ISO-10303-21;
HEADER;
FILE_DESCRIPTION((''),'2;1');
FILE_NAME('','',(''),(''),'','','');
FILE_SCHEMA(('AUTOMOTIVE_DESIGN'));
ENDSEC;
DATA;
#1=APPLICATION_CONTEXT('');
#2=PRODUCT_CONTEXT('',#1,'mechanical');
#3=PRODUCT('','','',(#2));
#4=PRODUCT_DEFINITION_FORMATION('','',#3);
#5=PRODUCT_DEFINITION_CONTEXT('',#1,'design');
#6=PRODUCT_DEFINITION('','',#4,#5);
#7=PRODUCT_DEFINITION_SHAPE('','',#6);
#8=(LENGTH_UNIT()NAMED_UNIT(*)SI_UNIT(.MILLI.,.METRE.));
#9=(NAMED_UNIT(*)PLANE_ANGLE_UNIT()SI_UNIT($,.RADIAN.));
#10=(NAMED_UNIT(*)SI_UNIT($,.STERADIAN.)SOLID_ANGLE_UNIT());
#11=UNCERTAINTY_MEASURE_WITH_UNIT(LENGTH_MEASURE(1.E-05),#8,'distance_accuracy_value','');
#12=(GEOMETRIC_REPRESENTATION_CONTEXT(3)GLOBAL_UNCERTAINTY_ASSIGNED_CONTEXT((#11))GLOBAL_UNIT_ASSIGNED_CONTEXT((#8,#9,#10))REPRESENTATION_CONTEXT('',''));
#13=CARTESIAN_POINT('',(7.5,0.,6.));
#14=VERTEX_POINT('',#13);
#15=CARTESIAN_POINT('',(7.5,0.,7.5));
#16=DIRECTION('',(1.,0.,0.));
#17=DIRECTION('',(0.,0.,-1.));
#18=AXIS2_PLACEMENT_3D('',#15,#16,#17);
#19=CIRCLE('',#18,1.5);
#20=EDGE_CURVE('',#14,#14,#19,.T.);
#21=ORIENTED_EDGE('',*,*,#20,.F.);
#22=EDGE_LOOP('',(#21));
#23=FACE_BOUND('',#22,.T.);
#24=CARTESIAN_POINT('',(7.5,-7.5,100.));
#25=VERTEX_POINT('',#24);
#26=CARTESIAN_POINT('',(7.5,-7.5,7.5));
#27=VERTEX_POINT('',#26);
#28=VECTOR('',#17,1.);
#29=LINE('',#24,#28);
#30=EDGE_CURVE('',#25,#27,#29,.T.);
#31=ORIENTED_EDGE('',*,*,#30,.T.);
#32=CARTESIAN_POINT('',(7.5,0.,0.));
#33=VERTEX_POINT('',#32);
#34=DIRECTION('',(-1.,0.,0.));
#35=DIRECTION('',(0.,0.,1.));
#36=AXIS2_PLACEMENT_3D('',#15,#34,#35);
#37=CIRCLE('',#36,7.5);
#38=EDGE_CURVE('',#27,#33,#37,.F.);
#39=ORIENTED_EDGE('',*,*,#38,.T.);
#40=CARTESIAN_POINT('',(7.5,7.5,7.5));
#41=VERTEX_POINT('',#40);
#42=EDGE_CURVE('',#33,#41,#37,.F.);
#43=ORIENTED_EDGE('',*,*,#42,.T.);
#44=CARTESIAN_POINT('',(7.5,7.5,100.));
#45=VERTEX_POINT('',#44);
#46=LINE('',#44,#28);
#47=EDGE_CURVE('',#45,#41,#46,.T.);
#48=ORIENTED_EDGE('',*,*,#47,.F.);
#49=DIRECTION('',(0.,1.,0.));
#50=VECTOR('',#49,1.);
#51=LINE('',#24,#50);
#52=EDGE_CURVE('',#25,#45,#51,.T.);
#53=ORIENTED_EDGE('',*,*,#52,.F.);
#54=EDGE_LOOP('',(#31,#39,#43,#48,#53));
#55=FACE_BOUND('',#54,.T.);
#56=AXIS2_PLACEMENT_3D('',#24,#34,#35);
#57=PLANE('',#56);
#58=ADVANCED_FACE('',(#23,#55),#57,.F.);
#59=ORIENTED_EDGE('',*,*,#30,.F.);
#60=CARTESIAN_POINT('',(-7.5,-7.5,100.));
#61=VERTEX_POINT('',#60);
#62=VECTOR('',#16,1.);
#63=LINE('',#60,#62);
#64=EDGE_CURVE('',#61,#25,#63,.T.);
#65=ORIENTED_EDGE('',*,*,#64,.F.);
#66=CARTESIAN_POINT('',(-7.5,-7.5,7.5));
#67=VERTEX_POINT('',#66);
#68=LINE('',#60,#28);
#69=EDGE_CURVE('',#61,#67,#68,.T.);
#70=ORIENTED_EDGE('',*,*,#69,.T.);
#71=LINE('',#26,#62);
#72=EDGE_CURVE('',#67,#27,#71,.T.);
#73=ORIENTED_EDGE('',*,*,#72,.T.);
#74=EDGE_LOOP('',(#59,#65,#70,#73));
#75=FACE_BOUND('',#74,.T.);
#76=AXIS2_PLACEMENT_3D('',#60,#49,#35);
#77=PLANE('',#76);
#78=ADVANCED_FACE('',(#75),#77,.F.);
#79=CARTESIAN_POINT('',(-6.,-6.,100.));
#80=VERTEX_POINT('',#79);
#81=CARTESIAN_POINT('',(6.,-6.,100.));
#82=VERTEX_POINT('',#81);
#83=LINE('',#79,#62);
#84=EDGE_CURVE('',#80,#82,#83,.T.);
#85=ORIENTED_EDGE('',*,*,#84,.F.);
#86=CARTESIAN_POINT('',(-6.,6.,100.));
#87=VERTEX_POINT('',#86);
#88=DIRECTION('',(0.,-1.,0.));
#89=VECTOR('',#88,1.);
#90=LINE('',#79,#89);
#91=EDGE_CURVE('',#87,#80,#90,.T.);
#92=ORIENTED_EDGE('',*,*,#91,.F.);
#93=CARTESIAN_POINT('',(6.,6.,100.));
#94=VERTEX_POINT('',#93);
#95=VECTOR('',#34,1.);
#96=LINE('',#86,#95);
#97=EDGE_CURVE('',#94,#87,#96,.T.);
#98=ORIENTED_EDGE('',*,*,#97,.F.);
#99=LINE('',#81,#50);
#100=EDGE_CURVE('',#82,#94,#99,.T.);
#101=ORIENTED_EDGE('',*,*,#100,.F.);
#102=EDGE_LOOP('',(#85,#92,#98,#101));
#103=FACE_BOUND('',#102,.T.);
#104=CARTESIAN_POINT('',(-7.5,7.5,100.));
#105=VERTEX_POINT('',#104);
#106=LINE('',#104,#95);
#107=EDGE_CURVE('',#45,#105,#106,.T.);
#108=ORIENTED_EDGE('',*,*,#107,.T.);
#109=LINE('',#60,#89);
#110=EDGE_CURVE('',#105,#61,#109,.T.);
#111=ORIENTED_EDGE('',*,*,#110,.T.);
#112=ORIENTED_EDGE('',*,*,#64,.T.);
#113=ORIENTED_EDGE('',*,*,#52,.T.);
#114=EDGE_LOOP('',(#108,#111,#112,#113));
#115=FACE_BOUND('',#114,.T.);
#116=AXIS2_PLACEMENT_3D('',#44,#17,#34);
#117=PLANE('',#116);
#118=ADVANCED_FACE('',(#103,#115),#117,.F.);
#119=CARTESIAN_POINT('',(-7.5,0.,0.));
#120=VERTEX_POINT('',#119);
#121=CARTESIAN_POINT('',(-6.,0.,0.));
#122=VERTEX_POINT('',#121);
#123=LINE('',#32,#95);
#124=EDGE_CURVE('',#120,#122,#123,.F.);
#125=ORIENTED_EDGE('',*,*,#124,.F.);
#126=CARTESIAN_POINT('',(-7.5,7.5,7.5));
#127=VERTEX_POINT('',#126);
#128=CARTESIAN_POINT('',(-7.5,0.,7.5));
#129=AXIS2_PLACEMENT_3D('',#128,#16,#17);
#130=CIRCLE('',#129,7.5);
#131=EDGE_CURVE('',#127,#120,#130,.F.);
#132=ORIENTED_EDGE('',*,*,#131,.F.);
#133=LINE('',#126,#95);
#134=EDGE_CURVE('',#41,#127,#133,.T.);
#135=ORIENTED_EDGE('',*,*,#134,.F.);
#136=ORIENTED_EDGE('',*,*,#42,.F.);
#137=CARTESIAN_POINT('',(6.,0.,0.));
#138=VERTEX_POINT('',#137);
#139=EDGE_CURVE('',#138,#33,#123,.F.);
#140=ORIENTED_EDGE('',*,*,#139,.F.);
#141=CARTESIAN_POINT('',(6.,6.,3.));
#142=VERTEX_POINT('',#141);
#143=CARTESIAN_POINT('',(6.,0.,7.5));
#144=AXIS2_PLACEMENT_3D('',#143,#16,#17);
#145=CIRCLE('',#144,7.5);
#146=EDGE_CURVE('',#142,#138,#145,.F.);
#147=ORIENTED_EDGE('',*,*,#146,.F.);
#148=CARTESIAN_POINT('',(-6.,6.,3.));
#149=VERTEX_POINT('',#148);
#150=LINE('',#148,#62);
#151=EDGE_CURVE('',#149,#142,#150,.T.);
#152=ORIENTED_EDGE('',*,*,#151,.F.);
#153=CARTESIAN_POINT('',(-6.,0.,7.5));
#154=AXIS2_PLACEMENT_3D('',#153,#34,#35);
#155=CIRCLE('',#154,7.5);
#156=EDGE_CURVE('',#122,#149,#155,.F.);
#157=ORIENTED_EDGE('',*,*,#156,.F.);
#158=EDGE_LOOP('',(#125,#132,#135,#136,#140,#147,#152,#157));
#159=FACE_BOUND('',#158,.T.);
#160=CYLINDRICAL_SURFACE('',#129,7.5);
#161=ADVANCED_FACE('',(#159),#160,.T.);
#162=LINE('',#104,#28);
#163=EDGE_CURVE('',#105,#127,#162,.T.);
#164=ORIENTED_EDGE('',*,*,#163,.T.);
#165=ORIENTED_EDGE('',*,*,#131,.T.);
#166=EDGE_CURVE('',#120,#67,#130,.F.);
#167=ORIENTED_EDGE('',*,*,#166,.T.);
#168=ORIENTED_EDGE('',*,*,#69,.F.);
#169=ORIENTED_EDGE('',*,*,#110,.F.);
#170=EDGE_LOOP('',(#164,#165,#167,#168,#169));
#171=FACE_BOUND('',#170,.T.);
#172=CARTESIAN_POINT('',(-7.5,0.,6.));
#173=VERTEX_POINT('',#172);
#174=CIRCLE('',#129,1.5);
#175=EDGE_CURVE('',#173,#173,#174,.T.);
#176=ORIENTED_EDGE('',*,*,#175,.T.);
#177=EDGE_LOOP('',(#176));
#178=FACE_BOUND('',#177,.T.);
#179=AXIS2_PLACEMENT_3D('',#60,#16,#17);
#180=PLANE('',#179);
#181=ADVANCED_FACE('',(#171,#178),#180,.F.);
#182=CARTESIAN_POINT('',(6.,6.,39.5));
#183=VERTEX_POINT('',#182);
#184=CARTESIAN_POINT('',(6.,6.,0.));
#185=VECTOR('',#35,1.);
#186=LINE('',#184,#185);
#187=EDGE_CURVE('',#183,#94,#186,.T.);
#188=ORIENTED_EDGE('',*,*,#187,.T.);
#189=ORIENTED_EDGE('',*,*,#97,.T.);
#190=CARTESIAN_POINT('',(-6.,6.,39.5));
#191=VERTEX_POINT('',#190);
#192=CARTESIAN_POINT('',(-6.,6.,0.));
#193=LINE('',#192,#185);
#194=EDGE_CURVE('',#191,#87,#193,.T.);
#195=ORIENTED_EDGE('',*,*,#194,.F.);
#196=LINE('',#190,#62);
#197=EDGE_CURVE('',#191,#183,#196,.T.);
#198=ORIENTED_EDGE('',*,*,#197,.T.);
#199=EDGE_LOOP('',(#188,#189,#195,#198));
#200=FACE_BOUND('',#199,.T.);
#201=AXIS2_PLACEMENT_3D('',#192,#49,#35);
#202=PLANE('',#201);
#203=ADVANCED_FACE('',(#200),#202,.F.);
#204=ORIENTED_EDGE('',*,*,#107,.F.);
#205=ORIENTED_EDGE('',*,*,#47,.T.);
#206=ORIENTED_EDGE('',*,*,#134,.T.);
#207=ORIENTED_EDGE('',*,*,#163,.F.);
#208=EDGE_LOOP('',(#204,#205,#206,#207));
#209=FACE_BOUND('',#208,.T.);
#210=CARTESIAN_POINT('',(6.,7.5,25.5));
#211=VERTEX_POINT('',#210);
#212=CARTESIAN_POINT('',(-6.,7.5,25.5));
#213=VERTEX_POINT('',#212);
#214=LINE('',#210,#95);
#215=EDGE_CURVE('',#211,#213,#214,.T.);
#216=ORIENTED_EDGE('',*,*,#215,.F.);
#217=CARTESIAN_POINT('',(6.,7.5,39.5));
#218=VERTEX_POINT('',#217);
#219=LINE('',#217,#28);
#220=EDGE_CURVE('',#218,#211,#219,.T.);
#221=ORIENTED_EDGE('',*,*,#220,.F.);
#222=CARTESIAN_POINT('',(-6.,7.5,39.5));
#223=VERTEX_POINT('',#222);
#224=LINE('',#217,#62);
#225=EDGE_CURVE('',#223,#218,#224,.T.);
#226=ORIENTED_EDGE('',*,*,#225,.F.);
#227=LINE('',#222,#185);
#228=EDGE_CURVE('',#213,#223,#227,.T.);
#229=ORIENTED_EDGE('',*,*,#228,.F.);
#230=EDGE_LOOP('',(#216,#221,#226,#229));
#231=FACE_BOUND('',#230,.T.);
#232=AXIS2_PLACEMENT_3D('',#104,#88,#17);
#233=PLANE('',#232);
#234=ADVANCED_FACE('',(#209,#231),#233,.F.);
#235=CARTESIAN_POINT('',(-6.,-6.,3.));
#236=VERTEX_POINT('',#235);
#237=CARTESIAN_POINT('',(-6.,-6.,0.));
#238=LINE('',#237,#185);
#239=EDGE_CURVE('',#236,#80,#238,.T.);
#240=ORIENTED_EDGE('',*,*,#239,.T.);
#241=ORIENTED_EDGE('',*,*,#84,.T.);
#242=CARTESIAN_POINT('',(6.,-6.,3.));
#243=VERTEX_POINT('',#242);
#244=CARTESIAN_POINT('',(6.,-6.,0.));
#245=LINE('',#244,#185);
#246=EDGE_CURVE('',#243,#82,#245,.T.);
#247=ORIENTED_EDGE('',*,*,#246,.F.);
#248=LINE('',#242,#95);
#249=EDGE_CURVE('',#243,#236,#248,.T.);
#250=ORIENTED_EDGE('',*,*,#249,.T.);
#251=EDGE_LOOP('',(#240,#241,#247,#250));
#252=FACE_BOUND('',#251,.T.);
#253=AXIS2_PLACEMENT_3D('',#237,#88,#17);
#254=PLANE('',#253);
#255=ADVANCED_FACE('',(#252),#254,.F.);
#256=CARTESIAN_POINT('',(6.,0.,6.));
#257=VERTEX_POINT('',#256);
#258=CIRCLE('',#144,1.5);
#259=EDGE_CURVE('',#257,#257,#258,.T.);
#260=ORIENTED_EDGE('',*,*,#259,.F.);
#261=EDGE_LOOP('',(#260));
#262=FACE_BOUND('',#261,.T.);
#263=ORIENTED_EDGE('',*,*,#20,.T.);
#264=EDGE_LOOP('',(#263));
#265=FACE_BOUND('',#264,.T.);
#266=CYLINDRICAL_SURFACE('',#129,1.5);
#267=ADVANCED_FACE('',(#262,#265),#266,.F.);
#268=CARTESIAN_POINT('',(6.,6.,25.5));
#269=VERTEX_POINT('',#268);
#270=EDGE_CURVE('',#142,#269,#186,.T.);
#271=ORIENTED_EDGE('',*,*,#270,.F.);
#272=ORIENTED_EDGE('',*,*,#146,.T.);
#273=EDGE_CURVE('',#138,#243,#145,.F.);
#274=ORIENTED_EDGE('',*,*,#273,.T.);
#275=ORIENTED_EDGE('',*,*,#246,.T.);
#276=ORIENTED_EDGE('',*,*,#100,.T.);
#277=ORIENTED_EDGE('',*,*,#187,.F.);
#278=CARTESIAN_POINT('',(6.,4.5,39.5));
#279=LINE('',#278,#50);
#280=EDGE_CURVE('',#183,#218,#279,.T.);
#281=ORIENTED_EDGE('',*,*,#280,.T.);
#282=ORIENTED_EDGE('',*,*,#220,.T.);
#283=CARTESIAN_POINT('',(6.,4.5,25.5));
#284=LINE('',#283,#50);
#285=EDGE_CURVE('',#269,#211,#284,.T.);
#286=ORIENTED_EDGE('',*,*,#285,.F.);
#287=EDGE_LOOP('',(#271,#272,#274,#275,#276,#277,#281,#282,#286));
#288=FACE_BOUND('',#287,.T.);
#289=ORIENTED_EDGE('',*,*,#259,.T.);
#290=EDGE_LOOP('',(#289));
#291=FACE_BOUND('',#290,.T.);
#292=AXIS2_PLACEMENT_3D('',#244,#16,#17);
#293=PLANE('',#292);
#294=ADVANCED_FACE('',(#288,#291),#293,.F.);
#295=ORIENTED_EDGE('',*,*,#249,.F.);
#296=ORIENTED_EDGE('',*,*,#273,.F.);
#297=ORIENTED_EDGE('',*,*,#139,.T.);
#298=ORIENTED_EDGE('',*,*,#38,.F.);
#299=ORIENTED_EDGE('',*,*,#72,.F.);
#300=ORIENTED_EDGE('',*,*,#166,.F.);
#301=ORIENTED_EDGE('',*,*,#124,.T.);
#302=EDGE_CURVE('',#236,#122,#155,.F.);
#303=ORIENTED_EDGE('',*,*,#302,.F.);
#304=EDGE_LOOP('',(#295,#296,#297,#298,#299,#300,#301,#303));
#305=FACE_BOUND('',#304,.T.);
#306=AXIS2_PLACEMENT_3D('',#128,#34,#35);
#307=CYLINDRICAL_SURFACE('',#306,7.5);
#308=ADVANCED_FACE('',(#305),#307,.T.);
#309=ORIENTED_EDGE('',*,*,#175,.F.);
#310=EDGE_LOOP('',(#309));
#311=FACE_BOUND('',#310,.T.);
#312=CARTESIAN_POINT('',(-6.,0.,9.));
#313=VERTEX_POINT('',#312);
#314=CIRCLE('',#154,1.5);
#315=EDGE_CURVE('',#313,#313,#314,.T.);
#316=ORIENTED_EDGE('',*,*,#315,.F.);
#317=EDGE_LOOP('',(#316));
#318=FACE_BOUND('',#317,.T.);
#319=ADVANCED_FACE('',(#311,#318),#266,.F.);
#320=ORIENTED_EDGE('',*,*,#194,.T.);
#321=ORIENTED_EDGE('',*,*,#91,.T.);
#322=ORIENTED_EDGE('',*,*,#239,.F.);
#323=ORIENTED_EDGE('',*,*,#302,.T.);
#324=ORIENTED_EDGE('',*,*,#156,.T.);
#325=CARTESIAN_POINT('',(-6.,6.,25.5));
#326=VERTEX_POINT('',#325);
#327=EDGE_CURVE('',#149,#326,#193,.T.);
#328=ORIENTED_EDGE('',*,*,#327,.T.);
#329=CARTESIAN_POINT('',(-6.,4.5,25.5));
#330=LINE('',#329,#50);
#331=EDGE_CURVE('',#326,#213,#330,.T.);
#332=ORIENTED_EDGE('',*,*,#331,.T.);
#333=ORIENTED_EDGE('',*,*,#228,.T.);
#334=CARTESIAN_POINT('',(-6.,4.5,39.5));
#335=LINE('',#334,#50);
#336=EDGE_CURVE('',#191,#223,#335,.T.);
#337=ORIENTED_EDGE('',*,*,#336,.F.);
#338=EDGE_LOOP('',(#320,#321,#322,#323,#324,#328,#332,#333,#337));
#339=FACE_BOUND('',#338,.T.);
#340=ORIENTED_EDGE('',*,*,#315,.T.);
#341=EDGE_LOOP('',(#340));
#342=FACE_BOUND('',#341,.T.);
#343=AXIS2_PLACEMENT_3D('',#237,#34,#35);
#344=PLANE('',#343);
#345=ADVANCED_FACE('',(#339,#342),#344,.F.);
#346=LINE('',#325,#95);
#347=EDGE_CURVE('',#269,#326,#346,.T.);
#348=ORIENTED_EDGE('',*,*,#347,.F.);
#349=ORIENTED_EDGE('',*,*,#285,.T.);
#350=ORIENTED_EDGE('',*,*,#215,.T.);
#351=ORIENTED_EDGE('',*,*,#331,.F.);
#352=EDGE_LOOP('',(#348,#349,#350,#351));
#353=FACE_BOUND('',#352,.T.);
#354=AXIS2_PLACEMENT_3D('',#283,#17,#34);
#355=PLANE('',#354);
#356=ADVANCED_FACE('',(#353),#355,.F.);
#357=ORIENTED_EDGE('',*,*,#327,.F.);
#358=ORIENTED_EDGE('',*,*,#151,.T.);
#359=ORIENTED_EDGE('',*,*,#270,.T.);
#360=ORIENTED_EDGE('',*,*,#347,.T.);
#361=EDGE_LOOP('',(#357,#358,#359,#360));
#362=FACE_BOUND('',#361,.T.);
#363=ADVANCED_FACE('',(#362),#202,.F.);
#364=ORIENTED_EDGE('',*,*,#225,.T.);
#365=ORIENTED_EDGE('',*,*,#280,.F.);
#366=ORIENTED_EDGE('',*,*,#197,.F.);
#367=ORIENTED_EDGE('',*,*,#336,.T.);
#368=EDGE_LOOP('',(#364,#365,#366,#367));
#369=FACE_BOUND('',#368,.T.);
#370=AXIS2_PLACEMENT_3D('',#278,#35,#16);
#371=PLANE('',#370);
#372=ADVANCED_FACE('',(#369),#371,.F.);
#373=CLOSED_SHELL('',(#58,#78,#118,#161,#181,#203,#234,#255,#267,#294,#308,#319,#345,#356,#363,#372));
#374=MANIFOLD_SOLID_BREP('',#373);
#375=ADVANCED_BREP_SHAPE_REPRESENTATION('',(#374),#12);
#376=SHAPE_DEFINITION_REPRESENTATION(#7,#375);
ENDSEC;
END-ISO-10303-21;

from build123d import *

# Parameters (mm, degrees)
ESQUISSE1_W             = 15
ESQUISSE1_H             = 15
EXTRUSION1_DEPTH        = 100
ESQUISSE2_W             = 12
ESQUISSE2_H             = 12
EXTRUSION2_DEPTH        = 101.560926806
CONG_1_R                = 7.5
ESQUISSE3_R             = 1.5
EXTRUSION3_DEPTH        = 102.396498953
ESQUISSE4_W             = 12
ESQUISSE4_H             = 14
ENL_V_MAT_EXTRU_1_DEPTH = 3


with BuildPart() as part:
    # Esquisse1 → Extrusion1 (new body)
    with BuildSketch(Plane.XY):
        Rectangle(ESQUISSE1_W, ESQUISSE1_H)
    extrude(amount=EXTRUSION1_DEPTH)

    # Esquisse2 → Extrusion2 (cut, through all)
    with BuildSketch(Plane.XY.offset(100)):
        Rectangle(ESQUISSE2_W, ESQUISSE2_H)
    extrude(amount=-EXTRUSION2_DEPTH, mode=Mode.SUBTRACT)

    # Congé1
    # the kernel refuses this fillet: 7.5 mm, written as the material it takes off along each edge
    with BuildSketch(Plane(origin=(-26.25, -7.5, 0), x_dir=(0, 0, 1), z_dir=(1, 0, 0))) as cong_1_piece_1:
        with BuildLine():
            CenterArc((CONG_1_R, -CONG_1_R), CONG_1_R, 90, 90)
            Line((0, -CONG_1_R), (0, 0))
            Line((0, 0), (CONG_1_R, 0))
        make_face()
    extrude(amount=52.5, mode=Mode.SUBTRACT)
    with BuildSketch(Plane(origin=(26.25, 7.5, 0), x_dir=(0, -1, 0), z_dir=(-1, 0, 0))) as cong_1_piece_2:
        with BuildLine():
            CenterArc((CONG_1_R, CONG_1_R), CONG_1_R, 180, 90)
            Line((0, CONG_1_R), (0, 0))
            Line((0, 0), (CONG_1_R, 0))
        make_face()
    extrude(amount=52.5, mode=Mode.SUBTRACT)

    # Esquisse3 → Extrusion3 (cut, through all)
    with BuildSketch(Plane(origin=(7.5, 0, 0), x_dir=(0, 0, -1), z_dir=(1, 0, 0))):
        with Locations((-7.5, 0)):
            Circle(ESQUISSE3_R)
    extrude(amount=-EXTRUSION3_DEPTH, mode=Mode.SUBTRACT)

    # Esquisse4 → Enlèv. mat.-Extru.1 (cut)
    with BuildSketch(Plane(origin=(0, 7.5, 0), x_dir=(-1, 0, 0), z_dir=(0, 1, 0))):
        with Locations((0, 32.5)):
            Rectangle(ESQUISSE4_W, ESQUISSE4_H)
    extrude(amount=-ENL_V_MAT_EXTRU_1_DEPTH, mode=Mode.SUBTRACT)


solid = part.part
